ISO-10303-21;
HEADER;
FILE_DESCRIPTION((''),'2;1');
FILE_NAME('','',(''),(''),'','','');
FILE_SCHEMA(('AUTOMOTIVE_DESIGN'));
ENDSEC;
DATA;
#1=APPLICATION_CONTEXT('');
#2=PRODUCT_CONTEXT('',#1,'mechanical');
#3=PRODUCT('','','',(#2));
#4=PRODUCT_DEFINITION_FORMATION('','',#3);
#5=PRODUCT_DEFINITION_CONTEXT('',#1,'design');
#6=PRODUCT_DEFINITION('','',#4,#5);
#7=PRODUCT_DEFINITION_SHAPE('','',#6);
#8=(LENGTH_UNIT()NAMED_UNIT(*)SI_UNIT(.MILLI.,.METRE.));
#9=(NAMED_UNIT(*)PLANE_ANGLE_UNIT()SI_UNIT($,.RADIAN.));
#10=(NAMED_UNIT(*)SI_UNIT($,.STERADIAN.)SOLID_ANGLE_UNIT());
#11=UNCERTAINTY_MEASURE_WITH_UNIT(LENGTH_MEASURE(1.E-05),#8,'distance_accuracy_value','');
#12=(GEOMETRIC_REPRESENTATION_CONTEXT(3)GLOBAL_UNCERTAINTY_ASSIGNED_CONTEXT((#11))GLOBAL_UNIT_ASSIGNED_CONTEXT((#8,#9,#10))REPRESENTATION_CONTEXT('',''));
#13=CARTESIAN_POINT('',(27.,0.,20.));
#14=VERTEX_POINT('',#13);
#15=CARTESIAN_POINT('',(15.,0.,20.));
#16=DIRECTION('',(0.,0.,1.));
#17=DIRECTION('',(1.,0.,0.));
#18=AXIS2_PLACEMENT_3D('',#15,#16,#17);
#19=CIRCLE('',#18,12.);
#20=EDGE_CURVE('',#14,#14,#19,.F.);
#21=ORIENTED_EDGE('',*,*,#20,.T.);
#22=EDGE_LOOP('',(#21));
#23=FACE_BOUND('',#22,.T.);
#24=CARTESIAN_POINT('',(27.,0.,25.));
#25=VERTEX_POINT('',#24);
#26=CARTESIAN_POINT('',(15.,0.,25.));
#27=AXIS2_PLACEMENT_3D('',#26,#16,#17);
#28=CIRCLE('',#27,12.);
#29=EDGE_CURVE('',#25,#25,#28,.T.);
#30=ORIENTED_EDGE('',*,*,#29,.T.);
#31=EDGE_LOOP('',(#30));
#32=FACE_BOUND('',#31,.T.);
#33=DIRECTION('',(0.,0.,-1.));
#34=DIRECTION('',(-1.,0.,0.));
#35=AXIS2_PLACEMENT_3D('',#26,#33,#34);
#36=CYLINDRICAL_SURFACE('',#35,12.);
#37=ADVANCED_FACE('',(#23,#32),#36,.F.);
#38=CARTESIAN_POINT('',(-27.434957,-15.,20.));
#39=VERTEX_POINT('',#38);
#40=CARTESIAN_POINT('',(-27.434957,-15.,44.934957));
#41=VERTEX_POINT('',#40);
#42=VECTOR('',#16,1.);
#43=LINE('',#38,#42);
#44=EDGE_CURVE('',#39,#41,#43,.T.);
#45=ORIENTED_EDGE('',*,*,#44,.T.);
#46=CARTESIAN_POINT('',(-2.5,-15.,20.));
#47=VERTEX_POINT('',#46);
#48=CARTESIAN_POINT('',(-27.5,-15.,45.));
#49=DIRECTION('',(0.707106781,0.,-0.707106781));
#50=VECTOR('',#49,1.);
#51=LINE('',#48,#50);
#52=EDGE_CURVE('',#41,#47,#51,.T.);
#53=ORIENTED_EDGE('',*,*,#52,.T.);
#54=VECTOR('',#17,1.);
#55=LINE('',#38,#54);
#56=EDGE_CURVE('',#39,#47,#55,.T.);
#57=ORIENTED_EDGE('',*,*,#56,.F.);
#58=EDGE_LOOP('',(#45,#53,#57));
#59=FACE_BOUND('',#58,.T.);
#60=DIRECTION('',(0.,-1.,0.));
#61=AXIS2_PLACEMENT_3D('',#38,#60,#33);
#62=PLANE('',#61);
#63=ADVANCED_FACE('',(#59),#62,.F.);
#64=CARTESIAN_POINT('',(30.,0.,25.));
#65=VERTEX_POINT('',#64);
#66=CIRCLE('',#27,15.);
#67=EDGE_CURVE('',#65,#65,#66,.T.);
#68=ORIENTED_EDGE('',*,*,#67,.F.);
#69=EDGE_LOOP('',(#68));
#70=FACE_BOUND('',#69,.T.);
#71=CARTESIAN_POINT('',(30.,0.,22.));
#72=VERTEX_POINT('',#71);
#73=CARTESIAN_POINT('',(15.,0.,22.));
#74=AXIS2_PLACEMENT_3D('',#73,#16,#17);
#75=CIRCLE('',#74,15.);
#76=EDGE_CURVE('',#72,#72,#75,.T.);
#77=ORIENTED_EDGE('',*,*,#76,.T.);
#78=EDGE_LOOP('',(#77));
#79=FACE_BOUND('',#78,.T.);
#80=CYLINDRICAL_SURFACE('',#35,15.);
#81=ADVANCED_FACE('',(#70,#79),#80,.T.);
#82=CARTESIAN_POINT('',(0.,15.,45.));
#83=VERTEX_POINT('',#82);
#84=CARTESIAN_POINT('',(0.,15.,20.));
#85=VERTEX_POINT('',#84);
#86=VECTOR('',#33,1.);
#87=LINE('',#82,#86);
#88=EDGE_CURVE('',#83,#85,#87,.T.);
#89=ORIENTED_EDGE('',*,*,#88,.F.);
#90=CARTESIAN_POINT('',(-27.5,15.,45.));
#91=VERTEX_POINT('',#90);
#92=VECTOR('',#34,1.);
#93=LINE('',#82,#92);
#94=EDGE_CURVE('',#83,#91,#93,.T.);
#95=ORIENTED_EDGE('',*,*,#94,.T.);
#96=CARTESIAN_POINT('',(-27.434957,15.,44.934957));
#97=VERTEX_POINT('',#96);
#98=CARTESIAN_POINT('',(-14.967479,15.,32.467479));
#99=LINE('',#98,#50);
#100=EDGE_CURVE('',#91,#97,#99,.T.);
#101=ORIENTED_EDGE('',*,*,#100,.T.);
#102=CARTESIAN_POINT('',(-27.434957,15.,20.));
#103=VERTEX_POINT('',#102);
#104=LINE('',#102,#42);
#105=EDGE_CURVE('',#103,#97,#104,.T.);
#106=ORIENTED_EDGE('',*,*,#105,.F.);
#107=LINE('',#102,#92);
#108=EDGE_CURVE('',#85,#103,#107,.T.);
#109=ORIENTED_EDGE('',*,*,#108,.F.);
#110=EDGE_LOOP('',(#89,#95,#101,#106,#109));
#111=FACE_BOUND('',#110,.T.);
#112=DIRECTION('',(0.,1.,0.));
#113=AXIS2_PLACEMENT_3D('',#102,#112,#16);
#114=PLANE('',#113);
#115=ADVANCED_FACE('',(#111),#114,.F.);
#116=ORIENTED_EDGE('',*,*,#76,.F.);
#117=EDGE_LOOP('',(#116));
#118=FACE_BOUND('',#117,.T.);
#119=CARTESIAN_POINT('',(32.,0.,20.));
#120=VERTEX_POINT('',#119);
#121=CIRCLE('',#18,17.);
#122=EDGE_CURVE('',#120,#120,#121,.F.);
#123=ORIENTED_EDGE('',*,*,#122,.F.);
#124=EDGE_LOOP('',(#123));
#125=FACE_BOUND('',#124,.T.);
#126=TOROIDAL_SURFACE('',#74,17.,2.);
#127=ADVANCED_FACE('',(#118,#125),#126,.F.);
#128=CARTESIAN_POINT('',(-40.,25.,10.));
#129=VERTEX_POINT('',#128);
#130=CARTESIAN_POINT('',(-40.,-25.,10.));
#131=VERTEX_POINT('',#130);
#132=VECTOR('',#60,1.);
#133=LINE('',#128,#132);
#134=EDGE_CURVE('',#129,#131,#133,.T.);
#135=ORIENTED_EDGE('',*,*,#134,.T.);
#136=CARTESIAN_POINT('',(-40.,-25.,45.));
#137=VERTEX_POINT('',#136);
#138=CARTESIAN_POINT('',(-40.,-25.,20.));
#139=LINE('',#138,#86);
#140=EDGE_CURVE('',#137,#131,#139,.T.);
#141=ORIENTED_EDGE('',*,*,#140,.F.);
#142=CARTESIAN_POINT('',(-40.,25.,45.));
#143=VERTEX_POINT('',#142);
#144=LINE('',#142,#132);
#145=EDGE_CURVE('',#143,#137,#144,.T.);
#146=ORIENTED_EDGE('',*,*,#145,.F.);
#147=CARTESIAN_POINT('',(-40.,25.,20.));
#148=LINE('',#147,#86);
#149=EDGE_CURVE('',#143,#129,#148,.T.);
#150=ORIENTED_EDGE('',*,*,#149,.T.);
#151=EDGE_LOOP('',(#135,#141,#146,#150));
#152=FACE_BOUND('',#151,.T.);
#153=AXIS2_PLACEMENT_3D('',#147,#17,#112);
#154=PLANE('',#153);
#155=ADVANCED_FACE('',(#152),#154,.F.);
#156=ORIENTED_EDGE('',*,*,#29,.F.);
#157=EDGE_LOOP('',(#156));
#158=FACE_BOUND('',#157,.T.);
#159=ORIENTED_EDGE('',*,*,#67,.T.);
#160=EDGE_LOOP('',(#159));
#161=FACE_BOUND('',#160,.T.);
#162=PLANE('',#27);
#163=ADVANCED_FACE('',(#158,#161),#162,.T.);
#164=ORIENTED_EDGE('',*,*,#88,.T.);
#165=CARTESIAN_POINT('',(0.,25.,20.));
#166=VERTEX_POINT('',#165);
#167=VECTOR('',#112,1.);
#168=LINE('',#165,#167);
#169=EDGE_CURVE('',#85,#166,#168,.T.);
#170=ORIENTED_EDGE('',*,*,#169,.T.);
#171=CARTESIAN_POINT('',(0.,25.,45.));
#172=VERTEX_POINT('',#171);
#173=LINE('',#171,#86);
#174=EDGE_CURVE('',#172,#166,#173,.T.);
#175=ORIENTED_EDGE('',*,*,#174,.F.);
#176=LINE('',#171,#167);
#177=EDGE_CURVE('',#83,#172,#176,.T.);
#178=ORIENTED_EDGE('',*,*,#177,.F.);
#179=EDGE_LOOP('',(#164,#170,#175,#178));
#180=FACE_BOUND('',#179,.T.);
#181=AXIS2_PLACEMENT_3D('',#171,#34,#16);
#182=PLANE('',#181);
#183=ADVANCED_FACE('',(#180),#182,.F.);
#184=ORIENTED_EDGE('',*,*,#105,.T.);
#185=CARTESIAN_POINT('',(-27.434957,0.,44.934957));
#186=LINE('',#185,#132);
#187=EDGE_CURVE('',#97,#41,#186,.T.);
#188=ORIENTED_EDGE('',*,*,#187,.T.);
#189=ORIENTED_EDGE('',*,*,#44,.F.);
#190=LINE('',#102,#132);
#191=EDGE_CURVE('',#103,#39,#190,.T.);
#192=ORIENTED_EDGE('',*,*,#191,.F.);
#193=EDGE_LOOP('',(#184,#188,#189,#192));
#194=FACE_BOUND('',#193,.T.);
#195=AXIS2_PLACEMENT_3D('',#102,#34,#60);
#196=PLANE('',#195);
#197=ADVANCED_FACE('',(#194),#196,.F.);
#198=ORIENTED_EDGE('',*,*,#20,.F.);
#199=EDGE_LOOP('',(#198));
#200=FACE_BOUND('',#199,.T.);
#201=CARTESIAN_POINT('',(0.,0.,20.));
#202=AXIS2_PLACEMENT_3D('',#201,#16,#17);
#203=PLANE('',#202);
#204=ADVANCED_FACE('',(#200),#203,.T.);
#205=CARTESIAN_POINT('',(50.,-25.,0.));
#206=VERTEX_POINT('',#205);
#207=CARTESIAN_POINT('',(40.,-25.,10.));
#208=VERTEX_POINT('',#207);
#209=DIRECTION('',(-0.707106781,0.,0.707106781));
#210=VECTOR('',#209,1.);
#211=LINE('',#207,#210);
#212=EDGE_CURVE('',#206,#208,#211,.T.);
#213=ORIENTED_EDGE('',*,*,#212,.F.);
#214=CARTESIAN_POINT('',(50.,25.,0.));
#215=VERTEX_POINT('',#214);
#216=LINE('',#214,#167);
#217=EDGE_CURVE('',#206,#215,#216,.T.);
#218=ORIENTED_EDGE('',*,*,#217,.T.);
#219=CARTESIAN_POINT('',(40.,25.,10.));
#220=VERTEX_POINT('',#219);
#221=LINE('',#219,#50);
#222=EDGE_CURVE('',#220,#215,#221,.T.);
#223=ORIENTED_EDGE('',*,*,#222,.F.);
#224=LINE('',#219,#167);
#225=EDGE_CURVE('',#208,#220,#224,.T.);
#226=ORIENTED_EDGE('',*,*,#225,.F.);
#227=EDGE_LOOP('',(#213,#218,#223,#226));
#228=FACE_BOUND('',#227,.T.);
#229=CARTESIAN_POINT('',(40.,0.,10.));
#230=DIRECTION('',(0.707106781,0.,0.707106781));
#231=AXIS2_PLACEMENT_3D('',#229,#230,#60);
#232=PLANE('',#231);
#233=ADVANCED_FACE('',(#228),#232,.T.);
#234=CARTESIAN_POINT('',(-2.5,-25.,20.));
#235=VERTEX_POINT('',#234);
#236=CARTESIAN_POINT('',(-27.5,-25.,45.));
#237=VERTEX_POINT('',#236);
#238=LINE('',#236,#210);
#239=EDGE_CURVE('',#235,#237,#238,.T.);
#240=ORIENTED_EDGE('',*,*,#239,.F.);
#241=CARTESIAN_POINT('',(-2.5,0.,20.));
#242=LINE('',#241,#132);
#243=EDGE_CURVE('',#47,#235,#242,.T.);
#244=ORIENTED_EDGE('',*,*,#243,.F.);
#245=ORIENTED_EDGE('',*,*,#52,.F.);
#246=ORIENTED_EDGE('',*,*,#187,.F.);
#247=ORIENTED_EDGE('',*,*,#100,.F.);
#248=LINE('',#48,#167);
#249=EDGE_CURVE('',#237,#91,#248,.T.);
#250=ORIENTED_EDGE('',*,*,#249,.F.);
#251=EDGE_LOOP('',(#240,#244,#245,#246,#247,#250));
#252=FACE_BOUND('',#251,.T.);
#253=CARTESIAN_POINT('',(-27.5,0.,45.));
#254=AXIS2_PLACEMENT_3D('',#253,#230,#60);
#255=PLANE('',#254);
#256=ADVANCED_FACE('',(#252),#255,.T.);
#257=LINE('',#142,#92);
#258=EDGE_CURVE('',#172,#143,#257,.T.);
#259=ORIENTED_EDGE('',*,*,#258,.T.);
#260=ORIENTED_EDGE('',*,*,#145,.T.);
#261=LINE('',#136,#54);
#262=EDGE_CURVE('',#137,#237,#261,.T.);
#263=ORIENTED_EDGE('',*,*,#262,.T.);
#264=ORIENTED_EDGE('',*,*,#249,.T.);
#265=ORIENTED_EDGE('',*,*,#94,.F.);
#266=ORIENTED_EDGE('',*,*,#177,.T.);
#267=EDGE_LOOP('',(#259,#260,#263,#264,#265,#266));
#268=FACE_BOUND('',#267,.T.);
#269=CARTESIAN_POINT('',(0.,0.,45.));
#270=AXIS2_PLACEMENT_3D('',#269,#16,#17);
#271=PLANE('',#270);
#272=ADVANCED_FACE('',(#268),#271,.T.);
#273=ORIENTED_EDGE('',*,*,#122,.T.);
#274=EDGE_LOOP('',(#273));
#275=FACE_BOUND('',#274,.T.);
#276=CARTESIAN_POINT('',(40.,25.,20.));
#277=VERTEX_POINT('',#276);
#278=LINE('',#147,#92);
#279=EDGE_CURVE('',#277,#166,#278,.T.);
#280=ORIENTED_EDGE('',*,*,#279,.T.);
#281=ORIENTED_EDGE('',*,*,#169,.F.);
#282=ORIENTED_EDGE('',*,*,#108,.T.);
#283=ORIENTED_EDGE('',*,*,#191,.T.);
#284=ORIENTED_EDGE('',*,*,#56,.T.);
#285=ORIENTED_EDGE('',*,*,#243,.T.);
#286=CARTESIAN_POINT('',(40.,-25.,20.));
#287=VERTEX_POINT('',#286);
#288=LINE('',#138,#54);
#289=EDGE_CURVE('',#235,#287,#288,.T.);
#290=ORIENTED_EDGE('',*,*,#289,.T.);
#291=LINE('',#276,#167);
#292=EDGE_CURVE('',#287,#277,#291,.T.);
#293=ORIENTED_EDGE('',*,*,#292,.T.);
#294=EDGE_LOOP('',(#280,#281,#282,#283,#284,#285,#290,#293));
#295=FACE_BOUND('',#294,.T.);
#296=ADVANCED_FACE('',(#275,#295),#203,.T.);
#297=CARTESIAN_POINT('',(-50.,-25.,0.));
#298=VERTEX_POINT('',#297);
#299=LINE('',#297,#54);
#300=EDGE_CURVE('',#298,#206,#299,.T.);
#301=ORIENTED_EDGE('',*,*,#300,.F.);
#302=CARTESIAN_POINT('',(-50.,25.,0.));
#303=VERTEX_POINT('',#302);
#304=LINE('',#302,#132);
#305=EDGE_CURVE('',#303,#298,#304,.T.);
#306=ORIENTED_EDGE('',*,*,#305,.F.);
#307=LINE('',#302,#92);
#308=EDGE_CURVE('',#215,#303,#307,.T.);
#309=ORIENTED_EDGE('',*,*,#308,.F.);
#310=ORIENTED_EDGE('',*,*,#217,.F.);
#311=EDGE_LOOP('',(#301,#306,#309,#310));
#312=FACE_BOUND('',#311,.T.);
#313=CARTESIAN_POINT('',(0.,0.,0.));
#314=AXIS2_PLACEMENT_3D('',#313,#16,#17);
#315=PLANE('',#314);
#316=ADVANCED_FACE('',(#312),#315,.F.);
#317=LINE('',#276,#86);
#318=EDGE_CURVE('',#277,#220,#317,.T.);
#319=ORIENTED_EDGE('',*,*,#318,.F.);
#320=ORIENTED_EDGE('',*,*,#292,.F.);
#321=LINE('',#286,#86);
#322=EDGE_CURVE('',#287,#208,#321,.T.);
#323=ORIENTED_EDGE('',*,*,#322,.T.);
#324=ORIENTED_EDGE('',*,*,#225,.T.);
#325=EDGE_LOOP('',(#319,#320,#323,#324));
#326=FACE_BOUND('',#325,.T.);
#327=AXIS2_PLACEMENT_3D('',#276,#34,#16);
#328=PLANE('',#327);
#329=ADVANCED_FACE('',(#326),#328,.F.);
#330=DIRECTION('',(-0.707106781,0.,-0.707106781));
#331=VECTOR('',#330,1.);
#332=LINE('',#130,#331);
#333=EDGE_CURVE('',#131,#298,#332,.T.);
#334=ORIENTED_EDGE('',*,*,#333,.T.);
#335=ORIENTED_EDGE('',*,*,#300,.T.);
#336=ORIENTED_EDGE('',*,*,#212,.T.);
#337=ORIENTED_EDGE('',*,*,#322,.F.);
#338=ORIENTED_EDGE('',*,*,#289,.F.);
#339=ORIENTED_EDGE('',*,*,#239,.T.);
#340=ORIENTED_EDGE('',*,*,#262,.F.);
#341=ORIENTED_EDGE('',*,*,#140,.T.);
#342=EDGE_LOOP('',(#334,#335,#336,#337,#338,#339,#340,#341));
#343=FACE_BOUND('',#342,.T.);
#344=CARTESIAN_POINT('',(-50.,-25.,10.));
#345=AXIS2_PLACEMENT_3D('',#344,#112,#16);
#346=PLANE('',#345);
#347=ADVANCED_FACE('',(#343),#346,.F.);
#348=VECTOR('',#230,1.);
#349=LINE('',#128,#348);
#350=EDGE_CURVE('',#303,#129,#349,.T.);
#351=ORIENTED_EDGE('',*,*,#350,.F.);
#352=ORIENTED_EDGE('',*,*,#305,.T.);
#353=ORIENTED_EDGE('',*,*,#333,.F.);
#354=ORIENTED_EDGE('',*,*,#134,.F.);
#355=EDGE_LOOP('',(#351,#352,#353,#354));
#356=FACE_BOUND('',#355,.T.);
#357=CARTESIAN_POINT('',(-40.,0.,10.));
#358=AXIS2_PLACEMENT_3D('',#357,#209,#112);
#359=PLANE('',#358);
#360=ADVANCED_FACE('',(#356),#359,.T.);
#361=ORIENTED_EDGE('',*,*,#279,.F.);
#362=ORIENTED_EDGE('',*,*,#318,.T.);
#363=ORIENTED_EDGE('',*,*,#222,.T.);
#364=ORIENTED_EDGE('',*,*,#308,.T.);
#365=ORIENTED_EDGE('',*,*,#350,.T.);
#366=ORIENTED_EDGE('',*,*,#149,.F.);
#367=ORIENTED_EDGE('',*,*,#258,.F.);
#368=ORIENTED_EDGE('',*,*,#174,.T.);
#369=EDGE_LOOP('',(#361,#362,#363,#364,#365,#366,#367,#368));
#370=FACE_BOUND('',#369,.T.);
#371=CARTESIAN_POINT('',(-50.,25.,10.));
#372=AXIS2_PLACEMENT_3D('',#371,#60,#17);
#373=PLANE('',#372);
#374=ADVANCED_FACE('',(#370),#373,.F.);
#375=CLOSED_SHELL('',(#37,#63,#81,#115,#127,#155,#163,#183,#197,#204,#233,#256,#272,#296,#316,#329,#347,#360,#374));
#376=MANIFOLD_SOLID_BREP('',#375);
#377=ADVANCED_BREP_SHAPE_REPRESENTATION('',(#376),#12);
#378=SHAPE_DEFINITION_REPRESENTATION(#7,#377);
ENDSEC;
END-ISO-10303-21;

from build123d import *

# Parameters (mm, degrees)
SKETCH1_W           = 100
SKETCH1_H           = 50
BOSS_EXTRUDE2_DEPTH = 10
SKETCH3_W           = 80
SKETCH3_H           = 50
BOSS_EXTRUDE3_DEPTH = 10
SKETCH4_W           = 40
SKETCH4_H           = 50
BOSS_EXTRUDE4_DEPTH = 25
SKETCH5_W           = 60
SKETCH5_H           = 30
CUT_EXTRUDE1_DEPTH  = 25
SKETCH6_R           = 15
SKETCH6_R_2         = 12
BOSS_EXTRUDE5_DEPTH = 5
CHAMFER2_SIZE       = 10
CHAMFER3_SIZE       = 10
FILLET3_R           = 2
CHAMFER6_SIZE       = 27.5


# Some blends are built 0.0001 mm under size
with BuildPart() as part:
    # Sketch1 → Boss-Extrude2 (new body)
    with BuildSketch(Plane.XY):
        Rectangle(SKETCH1_W, SKETCH1_H)
    extrude(amount=BOSS_EXTRUDE2_DEPTH)

    # Sketch3 → Boss-Extrude3 (add)
    with BuildSketch(Plane.XY.offset(10)):
        Rectangle(SKETCH3_W, SKETCH3_H)
    extrude(amount=BOSS_EXTRUDE3_DEPTH)

    # Sketch4 → Boss-Extrude4 (add)
    with BuildSketch(Plane.XY.offset(20)):
        with Locations((-20, 0)):
            Rectangle(SKETCH4_W, SKETCH4_H)
    extrude(amount=BOSS_EXTRUDE4_DEPTH)

    # Sketch5 → Cut-Extrude1 (cut)
    with BuildSketch(Plane.XY.offset(45)):
        with Locations((2.565042783, 0)):
            Rectangle(SKETCH5_W, SKETCH5_H)
    extrude(amount=-CUT_EXTRUDE1_DEPTH, mode=Mode.SUBTRACT)

    # Sketch6 → Boss-Extrude5 (add)
    with BuildSketch(Plane.XY.offset(20)):
        with Locations((15, 0)):
            Circle(SKETCH6_R)
        with Locations((15, 0)):
            Circle(SKETCH6_R_2, mode=Mode.SUBTRACT)
    extrude(amount=BOSS_EXTRUDE5_DEPTH)

    # Chamfer2
    chamfer2_edges = [part.edges().sort_by_distance(p)[0] for p in [
        (50, 0, 10),
    ]]
    chamfer(chamfer2_edges, length=CHAMFER2_SIZE - 0.0001)  # a hair under: the kernel refuses the full size

    # Chamfer3
    chamfer3_edges = [part.edges().sort_by_distance(p)[0] for p in [
        (-50, 0, 10),
    ]]
    chamfer(chamfer3_edges, length=CHAMFER3_SIZE - 0.0001)  # a hair under: the kernel refuses the full size

    # Fillet3
    fillet3_edges = [part.edges().sort_by_distance(p)[0] for p in [
        (0, 0, 20),
    ]]
    fillet(fillet3_edges, radius=FILLET3_R)

    # Chamfer6
    # the kernel refuses this chamfer: 27.5 mm, written as the material it takes off along each edge
    with BuildSketch(Plane(origin=(0, -15, 45), x_dir=(0.027495876610586376, 0, -0.9996219169112968), z_dir=(0, -1, 0))) as chamfer6_piece_1_section:
        Polygon((CHAMFER6_SIZE * 0.999621916911, -CHAMFER6_SIZE * 0.0274958766106), (-CHAMFER6_SIZE * 0.0274958766106, -CHAMFER6_SIZE * 0.999621916911), (0, 0), align=None)
    chamfer6_piece_1 = extrude(amount=80.721282169, mode=Mode.PRIVATE)
    chamfer6_piece_1 = split(chamfer6_piece_1, bisect_by=Plane(origin=(-2.708333333, -20, 20), z_dir=(0, 0, 1)), keep=Keep.TOP, mode=Mode.PRIVATE)
    add(chamfer6_piece_1, mode=Mode.SUBTRACT)
    with BuildSketch(Plane(origin=(0, 55.721282169, 45), x_dir=(0.027495876610586376, 0, -0.9996219169112968), z_dir=(0, -1, 0))) as chamfer6_piece_2_section:
        Polygon((CHAMFER6_SIZE * 0.999621916911, -CHAMFER6_SIZE * 0.0274958766106), (-CHAMFER6_SIZE * 0.0274958766106, -CHAMFER6_SIZE * 0.999621916911), (0, 0), align=None)
    chamfer6_piece_2 = extrude(amount=151.442564338, mode=Mode.PRIVATE)
    chamfer6_piece_2 = split(chamfer6_piece_2, bisect_by=Plane(origin=(-27.456638145, 15, 44.978319072), z_dir=(0, -1, 0)), keep=Keep.TOP, mode=Mode.PRIVATE)
    chamfer6_piece_2 = split(chamfer6_piece_2, bisect_by=Plane(origin=(-27.456638145, 0, 25), z_dir=(0, 0, 1)), keep=Keep.TOP, mode=Mode.PRIVATE)
    add(chamfer6_piece_2, mode=Mode.SUBTRACT)


solid = part.part
